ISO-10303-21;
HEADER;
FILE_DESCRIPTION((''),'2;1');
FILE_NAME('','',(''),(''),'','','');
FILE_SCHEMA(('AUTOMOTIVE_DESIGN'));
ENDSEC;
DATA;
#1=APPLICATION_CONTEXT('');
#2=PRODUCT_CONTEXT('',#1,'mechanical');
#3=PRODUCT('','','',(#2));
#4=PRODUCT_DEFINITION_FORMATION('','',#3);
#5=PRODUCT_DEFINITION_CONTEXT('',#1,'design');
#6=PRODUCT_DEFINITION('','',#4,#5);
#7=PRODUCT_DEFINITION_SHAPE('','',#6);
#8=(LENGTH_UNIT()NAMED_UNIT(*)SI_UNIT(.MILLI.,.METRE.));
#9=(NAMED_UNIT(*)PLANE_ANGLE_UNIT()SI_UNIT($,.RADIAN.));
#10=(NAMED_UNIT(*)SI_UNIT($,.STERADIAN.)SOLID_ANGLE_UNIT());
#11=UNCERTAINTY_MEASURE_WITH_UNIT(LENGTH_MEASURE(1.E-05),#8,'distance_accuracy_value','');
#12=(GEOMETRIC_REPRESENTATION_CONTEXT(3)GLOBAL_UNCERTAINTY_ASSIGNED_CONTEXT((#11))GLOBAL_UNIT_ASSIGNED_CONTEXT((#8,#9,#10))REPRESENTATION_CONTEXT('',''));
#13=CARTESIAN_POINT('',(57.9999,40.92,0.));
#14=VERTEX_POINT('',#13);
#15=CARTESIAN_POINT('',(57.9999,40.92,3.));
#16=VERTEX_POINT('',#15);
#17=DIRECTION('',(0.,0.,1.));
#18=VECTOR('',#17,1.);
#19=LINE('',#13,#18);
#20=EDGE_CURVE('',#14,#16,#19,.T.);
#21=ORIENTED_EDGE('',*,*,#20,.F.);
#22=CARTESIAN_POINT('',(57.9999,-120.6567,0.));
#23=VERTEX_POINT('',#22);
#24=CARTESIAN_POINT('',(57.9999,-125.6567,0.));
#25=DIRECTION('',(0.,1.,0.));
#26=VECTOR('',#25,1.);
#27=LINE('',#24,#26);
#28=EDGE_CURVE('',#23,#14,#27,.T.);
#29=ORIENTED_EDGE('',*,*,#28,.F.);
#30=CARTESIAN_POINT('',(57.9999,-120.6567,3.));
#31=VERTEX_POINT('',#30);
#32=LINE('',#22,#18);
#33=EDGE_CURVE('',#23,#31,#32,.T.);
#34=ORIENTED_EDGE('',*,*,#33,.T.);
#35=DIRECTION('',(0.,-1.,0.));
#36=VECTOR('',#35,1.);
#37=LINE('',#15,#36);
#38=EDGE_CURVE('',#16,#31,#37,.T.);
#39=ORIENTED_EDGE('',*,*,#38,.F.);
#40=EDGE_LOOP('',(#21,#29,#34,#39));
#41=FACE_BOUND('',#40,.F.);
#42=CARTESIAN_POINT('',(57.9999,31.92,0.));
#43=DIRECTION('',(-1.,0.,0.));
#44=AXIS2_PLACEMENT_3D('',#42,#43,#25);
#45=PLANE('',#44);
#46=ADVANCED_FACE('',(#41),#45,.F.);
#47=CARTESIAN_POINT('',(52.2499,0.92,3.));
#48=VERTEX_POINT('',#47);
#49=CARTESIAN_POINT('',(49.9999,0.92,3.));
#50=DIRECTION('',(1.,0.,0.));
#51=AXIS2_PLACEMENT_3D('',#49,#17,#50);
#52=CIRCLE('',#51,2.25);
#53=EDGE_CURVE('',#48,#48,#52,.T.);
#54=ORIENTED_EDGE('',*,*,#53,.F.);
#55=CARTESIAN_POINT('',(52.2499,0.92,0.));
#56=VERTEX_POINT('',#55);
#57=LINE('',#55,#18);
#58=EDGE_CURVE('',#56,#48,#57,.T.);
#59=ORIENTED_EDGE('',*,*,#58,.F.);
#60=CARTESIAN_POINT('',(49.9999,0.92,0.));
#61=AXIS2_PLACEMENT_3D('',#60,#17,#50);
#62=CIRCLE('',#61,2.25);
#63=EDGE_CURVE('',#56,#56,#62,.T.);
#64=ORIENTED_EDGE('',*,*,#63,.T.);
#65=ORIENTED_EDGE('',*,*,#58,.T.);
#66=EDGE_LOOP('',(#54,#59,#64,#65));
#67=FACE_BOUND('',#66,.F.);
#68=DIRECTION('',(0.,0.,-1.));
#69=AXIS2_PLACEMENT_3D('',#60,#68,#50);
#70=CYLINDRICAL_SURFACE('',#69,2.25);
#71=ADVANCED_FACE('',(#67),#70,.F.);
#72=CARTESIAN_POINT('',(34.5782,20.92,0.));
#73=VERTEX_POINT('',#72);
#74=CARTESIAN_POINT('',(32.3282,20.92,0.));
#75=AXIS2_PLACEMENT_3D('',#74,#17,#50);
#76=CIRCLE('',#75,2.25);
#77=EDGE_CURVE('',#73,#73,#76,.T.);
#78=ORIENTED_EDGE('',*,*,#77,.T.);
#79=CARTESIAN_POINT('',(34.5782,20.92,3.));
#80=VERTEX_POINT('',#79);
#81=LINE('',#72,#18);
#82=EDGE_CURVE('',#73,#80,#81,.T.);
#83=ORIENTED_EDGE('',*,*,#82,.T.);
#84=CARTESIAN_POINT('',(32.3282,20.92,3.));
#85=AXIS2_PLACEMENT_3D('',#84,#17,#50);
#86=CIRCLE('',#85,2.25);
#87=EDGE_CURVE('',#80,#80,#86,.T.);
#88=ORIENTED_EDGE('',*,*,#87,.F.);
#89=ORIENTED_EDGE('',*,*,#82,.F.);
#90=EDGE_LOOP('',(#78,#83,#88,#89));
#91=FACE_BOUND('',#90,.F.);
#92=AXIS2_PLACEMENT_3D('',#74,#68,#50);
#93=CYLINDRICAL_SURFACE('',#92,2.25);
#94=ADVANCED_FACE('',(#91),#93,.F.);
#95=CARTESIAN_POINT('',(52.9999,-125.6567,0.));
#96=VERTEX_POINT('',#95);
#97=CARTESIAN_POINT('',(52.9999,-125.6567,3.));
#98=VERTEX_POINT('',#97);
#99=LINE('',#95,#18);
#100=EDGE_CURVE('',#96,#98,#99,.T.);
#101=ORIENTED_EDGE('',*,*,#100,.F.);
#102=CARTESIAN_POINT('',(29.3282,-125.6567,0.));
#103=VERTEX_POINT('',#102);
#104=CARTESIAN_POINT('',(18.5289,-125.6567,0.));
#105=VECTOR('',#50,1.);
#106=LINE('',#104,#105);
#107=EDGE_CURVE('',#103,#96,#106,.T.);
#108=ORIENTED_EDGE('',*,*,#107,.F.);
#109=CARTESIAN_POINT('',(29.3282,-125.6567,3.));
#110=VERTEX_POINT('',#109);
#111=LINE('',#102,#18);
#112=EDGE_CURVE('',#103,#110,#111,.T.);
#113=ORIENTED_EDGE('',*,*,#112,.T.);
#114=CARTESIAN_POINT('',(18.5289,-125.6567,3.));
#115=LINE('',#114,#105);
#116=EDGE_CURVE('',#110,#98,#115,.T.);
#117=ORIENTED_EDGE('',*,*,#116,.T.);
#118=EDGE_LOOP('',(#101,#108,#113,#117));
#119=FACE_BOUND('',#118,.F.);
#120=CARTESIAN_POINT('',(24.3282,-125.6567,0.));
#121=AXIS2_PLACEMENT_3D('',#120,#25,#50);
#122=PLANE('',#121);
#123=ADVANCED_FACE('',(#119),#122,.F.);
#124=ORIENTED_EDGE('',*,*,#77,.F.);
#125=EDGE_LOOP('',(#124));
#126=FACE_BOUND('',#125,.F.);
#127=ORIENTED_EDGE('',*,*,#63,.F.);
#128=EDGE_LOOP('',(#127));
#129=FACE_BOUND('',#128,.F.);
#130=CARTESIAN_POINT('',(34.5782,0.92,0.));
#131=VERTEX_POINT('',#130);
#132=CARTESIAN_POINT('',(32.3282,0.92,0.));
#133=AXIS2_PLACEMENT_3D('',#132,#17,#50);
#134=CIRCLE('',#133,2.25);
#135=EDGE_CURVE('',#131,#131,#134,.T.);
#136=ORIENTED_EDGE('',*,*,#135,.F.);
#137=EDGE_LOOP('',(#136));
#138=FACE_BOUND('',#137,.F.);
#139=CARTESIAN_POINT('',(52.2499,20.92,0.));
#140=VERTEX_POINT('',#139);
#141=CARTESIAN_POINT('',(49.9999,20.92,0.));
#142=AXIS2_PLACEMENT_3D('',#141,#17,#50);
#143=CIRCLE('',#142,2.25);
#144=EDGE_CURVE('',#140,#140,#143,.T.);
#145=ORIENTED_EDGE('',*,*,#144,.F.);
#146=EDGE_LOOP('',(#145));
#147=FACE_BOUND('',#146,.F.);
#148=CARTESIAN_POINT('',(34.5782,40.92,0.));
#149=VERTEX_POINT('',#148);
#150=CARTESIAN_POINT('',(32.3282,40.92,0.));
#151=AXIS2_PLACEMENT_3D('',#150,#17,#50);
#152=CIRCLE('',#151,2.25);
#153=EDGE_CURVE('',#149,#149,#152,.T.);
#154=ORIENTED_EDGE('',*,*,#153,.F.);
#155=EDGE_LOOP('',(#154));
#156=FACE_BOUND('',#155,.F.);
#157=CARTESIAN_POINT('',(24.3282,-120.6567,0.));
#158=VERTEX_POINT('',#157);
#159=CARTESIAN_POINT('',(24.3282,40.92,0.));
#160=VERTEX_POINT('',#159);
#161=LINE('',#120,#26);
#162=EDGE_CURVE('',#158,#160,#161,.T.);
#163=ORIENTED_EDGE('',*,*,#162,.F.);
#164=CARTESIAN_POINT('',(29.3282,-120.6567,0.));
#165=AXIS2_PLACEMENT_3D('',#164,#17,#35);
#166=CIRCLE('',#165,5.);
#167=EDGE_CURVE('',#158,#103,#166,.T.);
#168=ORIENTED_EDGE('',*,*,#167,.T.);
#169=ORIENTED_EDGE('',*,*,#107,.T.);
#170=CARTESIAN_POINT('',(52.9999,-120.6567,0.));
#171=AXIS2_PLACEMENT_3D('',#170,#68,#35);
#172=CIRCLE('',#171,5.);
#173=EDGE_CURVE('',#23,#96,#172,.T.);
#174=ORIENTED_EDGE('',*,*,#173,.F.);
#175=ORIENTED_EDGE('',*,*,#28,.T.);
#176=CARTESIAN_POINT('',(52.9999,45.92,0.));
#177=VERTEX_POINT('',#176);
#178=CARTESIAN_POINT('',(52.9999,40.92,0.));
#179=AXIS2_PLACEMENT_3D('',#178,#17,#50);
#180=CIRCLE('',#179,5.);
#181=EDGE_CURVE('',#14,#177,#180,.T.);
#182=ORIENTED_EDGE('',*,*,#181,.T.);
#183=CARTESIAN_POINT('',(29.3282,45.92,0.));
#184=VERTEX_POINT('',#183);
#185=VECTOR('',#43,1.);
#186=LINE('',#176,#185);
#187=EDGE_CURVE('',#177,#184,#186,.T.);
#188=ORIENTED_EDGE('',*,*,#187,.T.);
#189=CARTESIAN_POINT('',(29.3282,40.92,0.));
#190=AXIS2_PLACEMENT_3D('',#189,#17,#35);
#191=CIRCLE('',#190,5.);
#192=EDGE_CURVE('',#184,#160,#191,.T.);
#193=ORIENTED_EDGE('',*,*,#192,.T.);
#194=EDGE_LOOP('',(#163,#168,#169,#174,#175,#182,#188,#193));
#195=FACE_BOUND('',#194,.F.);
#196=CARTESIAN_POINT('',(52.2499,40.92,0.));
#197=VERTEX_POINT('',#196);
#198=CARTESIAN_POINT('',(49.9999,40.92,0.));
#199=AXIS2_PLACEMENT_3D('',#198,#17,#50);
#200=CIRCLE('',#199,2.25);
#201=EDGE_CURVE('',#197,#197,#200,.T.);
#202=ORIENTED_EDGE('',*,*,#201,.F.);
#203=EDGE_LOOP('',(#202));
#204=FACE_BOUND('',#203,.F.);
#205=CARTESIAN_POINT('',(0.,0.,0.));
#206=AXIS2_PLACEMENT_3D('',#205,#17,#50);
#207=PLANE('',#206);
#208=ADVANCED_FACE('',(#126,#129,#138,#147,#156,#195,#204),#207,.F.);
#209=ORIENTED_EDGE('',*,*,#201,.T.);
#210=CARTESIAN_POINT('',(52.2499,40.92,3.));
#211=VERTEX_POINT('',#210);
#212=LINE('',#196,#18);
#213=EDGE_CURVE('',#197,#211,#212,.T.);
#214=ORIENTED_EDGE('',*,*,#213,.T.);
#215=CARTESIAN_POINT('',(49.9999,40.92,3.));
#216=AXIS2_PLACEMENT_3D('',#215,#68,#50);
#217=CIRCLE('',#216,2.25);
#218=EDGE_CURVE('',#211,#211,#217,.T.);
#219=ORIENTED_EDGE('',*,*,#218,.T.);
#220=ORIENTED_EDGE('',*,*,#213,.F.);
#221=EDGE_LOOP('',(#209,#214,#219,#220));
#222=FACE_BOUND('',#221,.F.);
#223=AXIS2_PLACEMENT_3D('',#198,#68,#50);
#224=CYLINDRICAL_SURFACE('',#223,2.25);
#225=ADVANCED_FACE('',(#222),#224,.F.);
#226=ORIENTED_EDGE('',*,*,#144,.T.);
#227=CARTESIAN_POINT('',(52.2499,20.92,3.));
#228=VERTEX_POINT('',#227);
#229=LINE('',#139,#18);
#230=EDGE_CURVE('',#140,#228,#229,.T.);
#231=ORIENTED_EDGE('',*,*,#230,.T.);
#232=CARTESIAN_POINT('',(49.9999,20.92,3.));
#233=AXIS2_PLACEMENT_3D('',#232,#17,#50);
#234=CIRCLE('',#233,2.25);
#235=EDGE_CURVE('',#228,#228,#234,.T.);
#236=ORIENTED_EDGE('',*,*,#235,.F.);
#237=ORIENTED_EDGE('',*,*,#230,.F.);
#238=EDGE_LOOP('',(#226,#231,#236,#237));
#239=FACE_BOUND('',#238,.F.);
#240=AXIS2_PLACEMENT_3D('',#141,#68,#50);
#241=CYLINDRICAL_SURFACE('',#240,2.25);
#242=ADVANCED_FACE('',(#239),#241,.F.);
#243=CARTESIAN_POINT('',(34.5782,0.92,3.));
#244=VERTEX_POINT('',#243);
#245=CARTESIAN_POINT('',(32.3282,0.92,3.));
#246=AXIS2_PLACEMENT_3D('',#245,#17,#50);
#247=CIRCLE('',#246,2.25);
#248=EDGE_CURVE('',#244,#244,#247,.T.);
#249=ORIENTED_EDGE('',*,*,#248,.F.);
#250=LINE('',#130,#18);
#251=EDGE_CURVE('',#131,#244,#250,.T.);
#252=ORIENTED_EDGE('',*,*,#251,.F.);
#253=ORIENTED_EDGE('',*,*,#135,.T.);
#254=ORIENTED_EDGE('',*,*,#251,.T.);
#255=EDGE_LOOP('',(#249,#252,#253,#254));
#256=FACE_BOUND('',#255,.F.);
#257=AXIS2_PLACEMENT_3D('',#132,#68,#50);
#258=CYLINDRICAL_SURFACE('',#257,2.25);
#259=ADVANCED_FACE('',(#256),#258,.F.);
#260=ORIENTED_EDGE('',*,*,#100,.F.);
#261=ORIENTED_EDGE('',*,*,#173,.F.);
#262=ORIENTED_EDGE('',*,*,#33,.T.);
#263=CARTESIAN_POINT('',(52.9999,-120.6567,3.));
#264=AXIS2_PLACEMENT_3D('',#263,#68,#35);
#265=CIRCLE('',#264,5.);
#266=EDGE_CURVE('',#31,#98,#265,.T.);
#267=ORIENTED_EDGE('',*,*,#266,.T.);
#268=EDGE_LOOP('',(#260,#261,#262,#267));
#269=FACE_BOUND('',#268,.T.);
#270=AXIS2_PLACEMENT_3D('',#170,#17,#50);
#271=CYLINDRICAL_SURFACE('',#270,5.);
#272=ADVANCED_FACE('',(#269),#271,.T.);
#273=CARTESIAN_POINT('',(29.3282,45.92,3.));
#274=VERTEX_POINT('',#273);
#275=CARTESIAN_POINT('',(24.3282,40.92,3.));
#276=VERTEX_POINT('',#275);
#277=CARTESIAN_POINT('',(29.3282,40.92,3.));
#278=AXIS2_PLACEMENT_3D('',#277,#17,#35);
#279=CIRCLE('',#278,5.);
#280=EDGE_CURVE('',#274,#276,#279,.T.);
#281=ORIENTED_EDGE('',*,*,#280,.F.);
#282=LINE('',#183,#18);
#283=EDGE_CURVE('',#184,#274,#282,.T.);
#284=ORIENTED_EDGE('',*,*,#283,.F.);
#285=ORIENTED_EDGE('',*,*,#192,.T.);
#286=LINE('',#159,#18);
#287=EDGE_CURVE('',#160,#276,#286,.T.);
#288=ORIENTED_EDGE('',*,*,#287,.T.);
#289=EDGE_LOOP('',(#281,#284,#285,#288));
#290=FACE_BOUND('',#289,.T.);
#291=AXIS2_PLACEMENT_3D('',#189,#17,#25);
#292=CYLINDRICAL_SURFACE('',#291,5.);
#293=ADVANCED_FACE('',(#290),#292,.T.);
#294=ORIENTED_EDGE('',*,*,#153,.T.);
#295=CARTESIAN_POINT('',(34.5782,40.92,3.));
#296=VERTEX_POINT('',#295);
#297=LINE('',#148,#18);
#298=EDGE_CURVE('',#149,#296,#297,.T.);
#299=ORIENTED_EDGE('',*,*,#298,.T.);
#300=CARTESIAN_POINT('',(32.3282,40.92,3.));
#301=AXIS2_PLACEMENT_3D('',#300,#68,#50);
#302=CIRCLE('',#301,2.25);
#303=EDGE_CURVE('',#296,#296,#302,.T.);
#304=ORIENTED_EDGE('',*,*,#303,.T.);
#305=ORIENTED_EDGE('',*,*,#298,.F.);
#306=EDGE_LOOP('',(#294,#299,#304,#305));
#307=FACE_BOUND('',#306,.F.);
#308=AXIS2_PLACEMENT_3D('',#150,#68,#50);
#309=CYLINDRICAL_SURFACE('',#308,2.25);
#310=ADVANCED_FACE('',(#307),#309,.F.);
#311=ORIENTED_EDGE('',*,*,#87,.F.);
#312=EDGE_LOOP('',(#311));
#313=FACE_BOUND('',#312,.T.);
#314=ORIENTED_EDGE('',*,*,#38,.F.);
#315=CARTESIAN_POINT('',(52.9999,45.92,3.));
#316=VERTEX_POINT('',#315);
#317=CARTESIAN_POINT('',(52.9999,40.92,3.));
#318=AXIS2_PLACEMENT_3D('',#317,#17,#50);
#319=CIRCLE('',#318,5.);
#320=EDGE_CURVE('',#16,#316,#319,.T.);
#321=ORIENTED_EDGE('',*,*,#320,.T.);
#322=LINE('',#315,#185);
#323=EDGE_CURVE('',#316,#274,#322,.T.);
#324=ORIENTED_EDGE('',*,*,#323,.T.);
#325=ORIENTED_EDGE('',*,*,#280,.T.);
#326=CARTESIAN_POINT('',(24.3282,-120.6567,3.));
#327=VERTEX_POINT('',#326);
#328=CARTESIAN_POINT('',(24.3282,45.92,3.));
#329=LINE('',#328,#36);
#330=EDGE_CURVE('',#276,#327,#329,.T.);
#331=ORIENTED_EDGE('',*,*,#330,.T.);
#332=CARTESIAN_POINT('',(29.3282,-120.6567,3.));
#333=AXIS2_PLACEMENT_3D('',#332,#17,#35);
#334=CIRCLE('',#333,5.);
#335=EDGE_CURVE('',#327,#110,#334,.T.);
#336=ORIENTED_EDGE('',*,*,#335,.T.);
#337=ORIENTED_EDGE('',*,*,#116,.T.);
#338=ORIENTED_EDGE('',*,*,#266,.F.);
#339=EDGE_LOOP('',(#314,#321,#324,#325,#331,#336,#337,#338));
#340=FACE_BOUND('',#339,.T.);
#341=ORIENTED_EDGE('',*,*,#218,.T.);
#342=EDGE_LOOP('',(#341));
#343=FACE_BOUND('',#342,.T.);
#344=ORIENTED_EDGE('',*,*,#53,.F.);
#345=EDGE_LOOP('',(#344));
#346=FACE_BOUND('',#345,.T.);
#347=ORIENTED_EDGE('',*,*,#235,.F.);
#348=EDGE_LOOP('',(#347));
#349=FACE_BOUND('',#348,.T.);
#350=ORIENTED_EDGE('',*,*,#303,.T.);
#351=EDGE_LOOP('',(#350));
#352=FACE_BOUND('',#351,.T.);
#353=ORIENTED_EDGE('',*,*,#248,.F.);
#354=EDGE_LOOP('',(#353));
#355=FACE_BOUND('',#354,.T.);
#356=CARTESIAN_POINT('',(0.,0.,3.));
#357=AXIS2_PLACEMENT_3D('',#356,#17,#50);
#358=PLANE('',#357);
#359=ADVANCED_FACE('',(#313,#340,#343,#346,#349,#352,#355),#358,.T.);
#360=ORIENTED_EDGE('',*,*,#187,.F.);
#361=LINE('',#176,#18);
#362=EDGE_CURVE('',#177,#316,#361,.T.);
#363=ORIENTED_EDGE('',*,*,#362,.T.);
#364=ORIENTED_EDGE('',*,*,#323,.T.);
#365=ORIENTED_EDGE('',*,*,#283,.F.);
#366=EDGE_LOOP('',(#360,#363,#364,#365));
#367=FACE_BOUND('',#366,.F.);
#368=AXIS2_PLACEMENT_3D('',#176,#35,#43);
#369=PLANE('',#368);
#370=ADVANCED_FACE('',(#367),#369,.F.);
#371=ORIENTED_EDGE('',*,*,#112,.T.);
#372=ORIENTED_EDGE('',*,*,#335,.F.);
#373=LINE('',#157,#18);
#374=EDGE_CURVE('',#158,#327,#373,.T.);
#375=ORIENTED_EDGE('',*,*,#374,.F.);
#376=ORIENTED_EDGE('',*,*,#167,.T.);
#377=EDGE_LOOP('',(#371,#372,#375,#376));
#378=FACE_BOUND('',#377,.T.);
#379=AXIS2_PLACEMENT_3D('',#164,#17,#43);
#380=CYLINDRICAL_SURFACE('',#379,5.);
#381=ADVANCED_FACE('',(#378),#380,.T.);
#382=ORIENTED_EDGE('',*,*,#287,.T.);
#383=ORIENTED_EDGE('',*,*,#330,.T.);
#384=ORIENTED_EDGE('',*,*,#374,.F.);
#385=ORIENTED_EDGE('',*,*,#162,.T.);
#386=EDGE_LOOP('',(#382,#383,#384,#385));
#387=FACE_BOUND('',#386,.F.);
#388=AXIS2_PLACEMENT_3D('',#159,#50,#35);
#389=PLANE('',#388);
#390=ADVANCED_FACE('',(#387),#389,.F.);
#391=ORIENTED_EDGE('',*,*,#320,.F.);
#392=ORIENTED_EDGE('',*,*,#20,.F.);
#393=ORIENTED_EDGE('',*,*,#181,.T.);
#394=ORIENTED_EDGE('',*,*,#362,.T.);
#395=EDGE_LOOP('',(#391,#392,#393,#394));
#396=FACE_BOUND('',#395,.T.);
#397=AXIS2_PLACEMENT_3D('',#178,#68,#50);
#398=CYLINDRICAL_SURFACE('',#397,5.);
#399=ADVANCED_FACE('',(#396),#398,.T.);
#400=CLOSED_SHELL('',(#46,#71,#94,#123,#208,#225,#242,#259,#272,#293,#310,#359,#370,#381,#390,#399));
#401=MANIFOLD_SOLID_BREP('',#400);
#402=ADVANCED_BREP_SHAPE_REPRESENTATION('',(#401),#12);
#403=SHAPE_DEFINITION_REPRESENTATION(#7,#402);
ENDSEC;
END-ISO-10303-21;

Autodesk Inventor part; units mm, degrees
ref_plane "YZ Plane" through (0, 0, 0) normal (1, 0, 0) x (0, 1, 0)
ref_plane "XZ Plane" through (0, 0, 0) normal (0, 1, 0) x (-1, 0, 0)
ref_plane "XY Plane" through (0, 0, 0) normal (0, 0, 1) x (1, 0, 0)
sketch "Block1" plane through (0, 0, 0) normal (0, 0, 1) x (1, 0, 0)
  line L0 (22.2625, 0.2735) -> (22.2625, -13.7265)
  line L1 (56.7335, -13.7265) -> (22.2625, -13.7265)
  circle A0 centre (36.0618, -8.7265) radius 2.25
  circle A1 centre (53.7335, -8.7265) radius 2.25
  line L2 (61.7335, 0.2735) -> (61.7335, -8.7265)
  arc A2 (56.7335, -13.7265) -> (61.7335, -8.7265) centre (56.7335, -8.7265) ccw
  circle A3 centre (53.7335, 11.2735) radius 2.25
  line L3 (61.7335, 20.2735) -> (61.7335, 2.2735)
  circle A4 centre (36.0618, 11.2735) radius 2.25
  line L4 (61.7335, 0.2735) -> (22.2625, 0.2735)
  line L5 (22.2625, 2.2735) -> (61.7335, 2.2735)
  line L6 (22.2625, 20.2735) -> (22.2625, 2.2735)
  line L7 (61.7335, 31.2735) -> (61.7335, 22.2735)
  line L8 (61.7335, 20.2735) -> (22.2625, 20.2735)
  line L9 (22.2625, 22.2735) -> (61.7335, 22.2735)
  circle A5 centre (36.0618, 31.2735) radius 2.25
  line L10 (56.7335, 36.2735) -> (22.2625, 36.2735)
  line L11 (22.2625, 36.2735) -> (22.2625, 22.2735)
  circle A6 centre (53.7335, 31.2735) radius 2.25
  arc A7 (61.7335, 31.2735) -> (56.7335, 36.2735) centre (56.7335, 31.2735) ccw
  point P0 (44.3211, 11.7121)
  point P1 (21.7335, 36.2735)
sketch "Sketch1" plane through (0, 0, 0) normal (0, 0, 1) x (1, 0, 0)
  line L0 (57.9999, 40.92) -> (18.5289, 40.92)
  line L1 (18.5289, 40.92) -> (18.5289, -125.6567)
  line L2 (18.5289, -125.6567) -> (57.9999, -125.6567)
  line L3 (57.9999, -125.6567) -> (57.9999, 40.92)
  line L4 (24.3282, 45.92) -> (24.3282, -125.6567)
  line L5 (18.5289, 9.92) -> (18.5289, -4.08)
  line L6 (52.9999, -4.08) -> (18.5289, -4.08)
  circle A0 centre (32.3282, 0.92) radius 2.25
  circle A1 centre (49.9999, 0.92) radius 2.25
  line L7 (57.9999, 9.92) -> (57.9999, 0.92)
  arc A2 (52.9999, -4.08) -> (57.9999, 0.92) centre (52.9999, 0.92) ccw
  circle A3 centre (49.9999, 20.92) radius 2.25
  line L8 (57.9999, 29.92) -> (57.9999, 11.92)
  circle A4 centre (32.3282, 20.92) radius 2.25
  line L9 (57.9999, 9.92) -> (18.5289, 9.92)
  line L10 (18.5289, 11.92) -> (57.9999, 11.92)
  line L11 (18.5289, 29.92) -> (18.5289, 11.92)
  line L12 (57.9999, 40.92) -> (57.9999, 31.92)
  line L13 (57.9999, 29.92) -> (18.5289, 29.92)
  line L14 (18.5289, 31.92) -> (57.9999, 31.92)
  circle A5 centre (32.3282, 40.92) radius 2.25
  line L15 (52.9999, 45.92) -> (18.5289, 45.92)
  line L16 (18.5289, 45.92) -> (18.5289, 31.92)
  circle A6 centre (49.9999, 40.92) radius 2.25
  arc A7 (57.9999, 40.92) -> (52.9999, 45.92) centre (52.9999, 40.92) ccw
  point P0 (0, 0)
  point P1 (18.5289, 40.92)
  dimension "d3" = 8
  dimension "d4" = 171.5767
extrude "Extrusion1" add sketch "Sketch1" along normal blind 3 contours L3 L14 L4 L0 A5 A6 | L0 A6 A5 L4 L15 A7 | L3 L13 L4 L14 | L3 L10 L4 L13 | L3 L9 L4 L10 | L3 A2 L6 L4 L9 | L3 L2 L4 L6 A2
fillet "Fillet1" radius 5 3 edges at (57.9999, -125.6567, 1.5) (24.3282, -125.6567, 1.5) (24.3282, 45.92, 1.5)
properties part number "Lower Leaf"
